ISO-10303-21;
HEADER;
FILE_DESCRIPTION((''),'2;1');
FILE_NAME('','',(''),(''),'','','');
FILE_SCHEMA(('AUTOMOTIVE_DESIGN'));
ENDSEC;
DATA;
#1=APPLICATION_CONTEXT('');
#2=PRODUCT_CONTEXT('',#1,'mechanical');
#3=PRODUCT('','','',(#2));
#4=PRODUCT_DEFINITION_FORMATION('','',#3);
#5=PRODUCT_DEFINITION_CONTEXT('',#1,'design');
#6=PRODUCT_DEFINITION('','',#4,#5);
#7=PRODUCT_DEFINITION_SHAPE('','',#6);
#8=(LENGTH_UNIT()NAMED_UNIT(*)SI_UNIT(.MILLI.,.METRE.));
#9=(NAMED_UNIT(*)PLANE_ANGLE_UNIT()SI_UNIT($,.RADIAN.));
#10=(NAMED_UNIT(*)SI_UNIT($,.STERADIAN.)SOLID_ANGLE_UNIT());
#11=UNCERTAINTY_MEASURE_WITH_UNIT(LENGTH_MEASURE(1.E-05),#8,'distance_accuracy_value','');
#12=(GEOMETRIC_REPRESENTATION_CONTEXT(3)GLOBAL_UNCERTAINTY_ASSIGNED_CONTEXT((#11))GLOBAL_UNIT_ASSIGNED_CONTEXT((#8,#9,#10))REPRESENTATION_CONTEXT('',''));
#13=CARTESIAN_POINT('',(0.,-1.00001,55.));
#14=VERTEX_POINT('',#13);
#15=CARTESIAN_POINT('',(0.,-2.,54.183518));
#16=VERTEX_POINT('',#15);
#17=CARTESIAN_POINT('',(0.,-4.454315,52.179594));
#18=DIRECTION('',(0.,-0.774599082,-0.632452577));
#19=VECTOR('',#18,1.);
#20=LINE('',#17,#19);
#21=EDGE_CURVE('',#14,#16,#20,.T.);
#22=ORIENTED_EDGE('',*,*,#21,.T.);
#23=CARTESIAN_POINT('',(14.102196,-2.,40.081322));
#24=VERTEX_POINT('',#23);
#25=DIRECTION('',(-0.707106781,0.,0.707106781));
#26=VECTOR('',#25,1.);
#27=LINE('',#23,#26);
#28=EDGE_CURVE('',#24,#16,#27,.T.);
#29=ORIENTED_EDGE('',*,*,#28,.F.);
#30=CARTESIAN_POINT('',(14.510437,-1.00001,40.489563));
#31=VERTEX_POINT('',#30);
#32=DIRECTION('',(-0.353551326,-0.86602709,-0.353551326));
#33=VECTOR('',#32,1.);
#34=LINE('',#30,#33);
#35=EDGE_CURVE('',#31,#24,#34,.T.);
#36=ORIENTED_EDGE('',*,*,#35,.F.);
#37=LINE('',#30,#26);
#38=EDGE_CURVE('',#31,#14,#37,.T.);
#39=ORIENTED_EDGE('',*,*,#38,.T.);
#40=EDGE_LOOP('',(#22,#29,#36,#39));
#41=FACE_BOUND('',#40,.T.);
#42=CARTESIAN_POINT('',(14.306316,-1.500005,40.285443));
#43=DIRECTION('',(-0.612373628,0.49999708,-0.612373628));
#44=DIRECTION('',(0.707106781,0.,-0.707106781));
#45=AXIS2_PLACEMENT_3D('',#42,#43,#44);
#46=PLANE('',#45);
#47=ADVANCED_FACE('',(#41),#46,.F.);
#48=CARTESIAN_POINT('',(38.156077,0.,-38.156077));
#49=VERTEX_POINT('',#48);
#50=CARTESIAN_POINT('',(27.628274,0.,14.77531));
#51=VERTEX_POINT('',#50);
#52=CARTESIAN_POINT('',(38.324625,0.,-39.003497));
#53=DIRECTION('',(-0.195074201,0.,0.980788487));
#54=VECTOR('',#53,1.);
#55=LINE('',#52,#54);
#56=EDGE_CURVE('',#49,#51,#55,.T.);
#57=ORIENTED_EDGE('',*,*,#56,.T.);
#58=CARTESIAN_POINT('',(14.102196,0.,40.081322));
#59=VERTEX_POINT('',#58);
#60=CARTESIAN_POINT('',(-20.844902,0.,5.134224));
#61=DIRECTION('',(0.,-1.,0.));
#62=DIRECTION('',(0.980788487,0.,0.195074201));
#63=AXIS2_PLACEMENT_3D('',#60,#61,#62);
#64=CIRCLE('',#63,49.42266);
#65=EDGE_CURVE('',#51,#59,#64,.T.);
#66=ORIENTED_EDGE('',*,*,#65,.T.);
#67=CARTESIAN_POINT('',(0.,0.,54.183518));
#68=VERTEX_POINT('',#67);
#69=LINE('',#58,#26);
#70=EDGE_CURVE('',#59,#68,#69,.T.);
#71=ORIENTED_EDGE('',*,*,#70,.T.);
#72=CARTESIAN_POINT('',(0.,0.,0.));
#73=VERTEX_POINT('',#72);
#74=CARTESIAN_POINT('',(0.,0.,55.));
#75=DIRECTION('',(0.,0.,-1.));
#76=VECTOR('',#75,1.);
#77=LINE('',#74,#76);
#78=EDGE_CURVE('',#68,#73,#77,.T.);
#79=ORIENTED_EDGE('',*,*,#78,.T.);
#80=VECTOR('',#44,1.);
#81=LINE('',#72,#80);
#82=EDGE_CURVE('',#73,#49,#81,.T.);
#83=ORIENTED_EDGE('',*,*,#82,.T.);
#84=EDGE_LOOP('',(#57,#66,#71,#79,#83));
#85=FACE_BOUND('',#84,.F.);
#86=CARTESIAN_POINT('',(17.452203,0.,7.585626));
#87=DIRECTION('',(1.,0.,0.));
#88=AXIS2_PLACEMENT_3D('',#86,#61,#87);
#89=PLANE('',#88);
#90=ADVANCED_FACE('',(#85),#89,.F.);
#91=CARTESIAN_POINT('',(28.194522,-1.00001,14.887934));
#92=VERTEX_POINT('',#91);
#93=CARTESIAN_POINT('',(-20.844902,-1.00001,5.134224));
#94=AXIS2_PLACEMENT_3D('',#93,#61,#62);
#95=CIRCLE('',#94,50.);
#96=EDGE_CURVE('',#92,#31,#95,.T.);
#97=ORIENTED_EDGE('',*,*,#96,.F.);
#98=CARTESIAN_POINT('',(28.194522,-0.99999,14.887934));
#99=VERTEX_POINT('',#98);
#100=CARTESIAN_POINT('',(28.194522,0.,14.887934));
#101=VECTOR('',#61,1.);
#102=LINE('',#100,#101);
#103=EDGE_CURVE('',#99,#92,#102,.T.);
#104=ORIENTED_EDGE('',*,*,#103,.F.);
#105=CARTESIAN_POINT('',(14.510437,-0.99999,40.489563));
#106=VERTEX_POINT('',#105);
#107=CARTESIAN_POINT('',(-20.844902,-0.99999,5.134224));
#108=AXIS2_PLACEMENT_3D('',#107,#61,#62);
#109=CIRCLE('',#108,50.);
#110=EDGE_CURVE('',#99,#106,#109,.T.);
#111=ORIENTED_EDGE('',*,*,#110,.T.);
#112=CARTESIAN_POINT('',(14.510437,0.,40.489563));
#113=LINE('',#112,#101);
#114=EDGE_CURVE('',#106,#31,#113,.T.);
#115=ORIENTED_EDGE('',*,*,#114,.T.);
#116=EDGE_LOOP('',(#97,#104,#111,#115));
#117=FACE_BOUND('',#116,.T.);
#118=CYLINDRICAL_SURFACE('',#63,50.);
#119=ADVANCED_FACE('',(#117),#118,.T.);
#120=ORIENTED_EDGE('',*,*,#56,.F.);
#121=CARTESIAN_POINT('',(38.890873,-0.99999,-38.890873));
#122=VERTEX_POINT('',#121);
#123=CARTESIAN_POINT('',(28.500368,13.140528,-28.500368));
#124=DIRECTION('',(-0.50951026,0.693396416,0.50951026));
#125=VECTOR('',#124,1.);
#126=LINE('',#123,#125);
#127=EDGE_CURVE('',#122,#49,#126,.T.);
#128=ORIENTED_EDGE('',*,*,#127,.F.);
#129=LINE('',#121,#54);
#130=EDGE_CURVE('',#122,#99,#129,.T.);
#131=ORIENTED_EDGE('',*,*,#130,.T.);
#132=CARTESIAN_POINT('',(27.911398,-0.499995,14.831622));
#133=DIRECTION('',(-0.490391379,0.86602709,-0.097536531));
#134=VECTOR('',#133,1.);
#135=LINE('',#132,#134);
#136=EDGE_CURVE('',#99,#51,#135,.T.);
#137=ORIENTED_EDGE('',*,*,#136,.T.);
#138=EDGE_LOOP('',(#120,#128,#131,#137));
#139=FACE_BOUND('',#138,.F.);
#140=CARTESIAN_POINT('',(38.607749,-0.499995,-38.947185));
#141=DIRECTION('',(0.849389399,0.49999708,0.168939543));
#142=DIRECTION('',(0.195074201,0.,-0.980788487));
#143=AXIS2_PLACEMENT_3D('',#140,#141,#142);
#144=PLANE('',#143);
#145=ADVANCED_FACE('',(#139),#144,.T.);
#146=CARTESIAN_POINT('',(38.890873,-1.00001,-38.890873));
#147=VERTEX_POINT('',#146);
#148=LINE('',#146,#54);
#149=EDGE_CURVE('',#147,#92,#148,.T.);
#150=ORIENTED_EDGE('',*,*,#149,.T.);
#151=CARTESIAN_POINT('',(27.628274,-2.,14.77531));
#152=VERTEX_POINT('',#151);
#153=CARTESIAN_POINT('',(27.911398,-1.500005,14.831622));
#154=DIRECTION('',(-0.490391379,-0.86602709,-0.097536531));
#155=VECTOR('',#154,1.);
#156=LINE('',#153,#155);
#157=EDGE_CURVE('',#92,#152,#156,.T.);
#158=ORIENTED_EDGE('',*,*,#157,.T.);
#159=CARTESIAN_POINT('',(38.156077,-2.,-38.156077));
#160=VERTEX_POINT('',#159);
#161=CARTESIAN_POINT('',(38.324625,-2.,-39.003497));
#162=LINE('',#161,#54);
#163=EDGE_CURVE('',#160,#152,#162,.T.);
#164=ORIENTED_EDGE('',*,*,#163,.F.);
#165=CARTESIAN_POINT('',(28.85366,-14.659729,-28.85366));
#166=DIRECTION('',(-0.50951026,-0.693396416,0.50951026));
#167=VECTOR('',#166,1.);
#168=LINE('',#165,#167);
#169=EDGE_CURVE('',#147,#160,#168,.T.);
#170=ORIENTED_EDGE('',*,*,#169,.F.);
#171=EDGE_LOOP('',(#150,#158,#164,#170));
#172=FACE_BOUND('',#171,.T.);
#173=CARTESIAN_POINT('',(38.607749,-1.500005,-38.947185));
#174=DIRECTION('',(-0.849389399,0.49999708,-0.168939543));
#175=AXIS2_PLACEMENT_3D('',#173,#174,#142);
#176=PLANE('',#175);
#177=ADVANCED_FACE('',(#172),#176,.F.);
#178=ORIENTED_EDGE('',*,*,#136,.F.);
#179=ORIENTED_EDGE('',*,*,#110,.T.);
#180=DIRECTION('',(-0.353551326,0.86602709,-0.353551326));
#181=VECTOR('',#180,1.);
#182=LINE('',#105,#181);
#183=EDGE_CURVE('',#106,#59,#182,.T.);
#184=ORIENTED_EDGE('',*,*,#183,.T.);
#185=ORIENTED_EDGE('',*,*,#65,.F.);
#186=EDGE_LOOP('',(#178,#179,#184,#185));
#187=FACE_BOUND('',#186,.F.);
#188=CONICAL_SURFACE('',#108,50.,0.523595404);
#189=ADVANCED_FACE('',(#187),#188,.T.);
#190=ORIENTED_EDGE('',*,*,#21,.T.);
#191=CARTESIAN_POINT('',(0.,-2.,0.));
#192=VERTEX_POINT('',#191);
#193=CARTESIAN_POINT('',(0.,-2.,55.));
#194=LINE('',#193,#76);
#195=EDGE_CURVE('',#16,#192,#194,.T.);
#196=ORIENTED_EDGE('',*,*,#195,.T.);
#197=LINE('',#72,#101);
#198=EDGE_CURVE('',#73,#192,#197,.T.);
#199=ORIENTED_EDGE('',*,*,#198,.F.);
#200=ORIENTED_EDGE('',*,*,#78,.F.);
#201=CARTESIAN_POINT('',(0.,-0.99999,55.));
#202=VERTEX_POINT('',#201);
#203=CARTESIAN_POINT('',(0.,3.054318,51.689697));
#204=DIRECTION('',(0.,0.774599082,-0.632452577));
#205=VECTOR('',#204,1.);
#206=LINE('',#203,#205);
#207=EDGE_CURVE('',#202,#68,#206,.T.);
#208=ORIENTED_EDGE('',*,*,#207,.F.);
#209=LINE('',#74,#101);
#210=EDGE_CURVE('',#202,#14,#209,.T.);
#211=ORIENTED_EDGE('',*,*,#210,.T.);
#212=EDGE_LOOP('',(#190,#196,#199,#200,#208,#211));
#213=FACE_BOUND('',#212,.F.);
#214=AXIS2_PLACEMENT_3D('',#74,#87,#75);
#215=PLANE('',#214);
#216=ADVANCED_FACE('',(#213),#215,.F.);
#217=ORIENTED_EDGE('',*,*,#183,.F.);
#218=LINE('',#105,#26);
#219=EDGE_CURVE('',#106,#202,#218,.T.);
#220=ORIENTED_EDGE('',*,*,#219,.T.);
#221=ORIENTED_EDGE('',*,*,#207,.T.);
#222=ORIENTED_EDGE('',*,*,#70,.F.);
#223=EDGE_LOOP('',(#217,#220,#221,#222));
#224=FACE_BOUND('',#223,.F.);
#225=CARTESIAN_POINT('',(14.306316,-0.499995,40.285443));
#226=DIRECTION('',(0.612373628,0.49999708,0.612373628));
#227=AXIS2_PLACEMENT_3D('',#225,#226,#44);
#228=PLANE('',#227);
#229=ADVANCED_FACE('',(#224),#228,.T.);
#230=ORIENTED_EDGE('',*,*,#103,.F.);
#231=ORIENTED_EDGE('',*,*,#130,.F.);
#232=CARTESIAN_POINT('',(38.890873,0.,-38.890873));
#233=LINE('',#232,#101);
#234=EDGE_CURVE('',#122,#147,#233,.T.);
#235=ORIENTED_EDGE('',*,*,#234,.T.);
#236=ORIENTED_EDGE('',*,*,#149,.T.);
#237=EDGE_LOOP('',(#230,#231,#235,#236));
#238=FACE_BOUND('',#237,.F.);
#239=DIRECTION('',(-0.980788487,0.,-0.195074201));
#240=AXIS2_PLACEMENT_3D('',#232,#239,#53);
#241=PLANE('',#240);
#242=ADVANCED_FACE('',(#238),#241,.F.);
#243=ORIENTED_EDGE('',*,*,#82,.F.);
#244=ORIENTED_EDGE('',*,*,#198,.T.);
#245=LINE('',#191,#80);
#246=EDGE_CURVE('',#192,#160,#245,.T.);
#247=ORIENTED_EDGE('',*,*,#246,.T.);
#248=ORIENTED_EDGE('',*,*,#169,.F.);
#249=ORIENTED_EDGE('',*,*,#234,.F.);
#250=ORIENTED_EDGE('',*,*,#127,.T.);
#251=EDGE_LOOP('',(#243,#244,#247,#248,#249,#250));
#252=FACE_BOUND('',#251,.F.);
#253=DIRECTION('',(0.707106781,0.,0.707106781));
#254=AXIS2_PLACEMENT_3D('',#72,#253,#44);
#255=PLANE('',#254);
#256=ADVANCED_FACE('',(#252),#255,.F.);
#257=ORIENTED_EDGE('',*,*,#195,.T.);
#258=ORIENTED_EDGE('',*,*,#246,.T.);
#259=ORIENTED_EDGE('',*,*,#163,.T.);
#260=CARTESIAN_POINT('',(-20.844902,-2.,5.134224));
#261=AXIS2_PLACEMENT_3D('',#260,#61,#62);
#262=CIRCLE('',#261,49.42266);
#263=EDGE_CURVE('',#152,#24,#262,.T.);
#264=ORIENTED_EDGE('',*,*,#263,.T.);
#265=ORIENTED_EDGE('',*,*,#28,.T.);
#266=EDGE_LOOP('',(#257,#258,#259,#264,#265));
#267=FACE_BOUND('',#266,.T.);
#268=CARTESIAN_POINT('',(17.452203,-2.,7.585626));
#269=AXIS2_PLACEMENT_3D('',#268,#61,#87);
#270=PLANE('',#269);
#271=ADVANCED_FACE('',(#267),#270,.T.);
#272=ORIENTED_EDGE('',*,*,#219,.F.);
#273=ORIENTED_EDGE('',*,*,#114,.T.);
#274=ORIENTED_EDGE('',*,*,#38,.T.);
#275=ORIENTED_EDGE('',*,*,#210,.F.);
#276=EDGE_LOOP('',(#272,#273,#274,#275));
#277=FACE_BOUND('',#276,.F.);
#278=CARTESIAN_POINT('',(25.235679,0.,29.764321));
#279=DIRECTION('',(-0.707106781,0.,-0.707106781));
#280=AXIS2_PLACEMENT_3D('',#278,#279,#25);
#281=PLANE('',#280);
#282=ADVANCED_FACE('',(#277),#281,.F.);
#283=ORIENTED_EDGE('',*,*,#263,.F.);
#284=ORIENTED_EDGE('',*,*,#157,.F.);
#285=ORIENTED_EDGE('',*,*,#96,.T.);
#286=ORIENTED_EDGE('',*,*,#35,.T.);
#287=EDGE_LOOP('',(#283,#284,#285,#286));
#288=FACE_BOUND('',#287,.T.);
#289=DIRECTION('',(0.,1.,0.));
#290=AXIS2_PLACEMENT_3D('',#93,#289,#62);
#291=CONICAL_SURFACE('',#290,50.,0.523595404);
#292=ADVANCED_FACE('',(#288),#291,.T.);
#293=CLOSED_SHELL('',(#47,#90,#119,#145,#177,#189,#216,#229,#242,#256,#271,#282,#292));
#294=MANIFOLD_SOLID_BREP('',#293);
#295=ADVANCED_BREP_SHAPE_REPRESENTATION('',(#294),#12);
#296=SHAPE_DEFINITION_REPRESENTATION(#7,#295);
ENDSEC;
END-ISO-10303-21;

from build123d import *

# Parameters (mm, degrees)
F1_DEPTH = 2
F2_R     = 50
F3_SIZE2 = 0.57734
F3_SIZE  = 0.99999


# Not quite as in the source:
# - a fillet or chamfer is up to 0.001 mm smaller than in the source, because OpenCascade refuses the exact size


with BuildPart() as f1:
    # F0 (on Front) → F1 (new body)
    with BuildSketch(Plane.XZ):
        Polygon((0, 55), (0, 0), (38.8908729653, -38.8908729653), (25.2356788824, 29.7643211176), align=None)
    extrude(amount=F1_DEPTH)

    # F2
    f2_edges = [f1.edges().sort_by_distance(p)[0] for p in [
        (25.235679, -1, 29.764321),
    ]]
    fillet(f2_edges, radius=F2_R)

    # F3 (size 1 and 0.5773502692 in the source; OpenCascade refuses exactly that, so slightly less here)
    f3_edges = [f1.edges().sort_by_distance(p)[0] for p in [
        (7.255218, -2, 47.744782),
        (7.255218, 0, 47.744782),
    ]]
    f3_side = f1.faces().sort_by_distance((7.255218, -1, 47.744782))[0]
    chamfer(f3_edges, length=F3_SIZE, length2=F3_SIZE2, reference=f3_side)


solid = f1.part
